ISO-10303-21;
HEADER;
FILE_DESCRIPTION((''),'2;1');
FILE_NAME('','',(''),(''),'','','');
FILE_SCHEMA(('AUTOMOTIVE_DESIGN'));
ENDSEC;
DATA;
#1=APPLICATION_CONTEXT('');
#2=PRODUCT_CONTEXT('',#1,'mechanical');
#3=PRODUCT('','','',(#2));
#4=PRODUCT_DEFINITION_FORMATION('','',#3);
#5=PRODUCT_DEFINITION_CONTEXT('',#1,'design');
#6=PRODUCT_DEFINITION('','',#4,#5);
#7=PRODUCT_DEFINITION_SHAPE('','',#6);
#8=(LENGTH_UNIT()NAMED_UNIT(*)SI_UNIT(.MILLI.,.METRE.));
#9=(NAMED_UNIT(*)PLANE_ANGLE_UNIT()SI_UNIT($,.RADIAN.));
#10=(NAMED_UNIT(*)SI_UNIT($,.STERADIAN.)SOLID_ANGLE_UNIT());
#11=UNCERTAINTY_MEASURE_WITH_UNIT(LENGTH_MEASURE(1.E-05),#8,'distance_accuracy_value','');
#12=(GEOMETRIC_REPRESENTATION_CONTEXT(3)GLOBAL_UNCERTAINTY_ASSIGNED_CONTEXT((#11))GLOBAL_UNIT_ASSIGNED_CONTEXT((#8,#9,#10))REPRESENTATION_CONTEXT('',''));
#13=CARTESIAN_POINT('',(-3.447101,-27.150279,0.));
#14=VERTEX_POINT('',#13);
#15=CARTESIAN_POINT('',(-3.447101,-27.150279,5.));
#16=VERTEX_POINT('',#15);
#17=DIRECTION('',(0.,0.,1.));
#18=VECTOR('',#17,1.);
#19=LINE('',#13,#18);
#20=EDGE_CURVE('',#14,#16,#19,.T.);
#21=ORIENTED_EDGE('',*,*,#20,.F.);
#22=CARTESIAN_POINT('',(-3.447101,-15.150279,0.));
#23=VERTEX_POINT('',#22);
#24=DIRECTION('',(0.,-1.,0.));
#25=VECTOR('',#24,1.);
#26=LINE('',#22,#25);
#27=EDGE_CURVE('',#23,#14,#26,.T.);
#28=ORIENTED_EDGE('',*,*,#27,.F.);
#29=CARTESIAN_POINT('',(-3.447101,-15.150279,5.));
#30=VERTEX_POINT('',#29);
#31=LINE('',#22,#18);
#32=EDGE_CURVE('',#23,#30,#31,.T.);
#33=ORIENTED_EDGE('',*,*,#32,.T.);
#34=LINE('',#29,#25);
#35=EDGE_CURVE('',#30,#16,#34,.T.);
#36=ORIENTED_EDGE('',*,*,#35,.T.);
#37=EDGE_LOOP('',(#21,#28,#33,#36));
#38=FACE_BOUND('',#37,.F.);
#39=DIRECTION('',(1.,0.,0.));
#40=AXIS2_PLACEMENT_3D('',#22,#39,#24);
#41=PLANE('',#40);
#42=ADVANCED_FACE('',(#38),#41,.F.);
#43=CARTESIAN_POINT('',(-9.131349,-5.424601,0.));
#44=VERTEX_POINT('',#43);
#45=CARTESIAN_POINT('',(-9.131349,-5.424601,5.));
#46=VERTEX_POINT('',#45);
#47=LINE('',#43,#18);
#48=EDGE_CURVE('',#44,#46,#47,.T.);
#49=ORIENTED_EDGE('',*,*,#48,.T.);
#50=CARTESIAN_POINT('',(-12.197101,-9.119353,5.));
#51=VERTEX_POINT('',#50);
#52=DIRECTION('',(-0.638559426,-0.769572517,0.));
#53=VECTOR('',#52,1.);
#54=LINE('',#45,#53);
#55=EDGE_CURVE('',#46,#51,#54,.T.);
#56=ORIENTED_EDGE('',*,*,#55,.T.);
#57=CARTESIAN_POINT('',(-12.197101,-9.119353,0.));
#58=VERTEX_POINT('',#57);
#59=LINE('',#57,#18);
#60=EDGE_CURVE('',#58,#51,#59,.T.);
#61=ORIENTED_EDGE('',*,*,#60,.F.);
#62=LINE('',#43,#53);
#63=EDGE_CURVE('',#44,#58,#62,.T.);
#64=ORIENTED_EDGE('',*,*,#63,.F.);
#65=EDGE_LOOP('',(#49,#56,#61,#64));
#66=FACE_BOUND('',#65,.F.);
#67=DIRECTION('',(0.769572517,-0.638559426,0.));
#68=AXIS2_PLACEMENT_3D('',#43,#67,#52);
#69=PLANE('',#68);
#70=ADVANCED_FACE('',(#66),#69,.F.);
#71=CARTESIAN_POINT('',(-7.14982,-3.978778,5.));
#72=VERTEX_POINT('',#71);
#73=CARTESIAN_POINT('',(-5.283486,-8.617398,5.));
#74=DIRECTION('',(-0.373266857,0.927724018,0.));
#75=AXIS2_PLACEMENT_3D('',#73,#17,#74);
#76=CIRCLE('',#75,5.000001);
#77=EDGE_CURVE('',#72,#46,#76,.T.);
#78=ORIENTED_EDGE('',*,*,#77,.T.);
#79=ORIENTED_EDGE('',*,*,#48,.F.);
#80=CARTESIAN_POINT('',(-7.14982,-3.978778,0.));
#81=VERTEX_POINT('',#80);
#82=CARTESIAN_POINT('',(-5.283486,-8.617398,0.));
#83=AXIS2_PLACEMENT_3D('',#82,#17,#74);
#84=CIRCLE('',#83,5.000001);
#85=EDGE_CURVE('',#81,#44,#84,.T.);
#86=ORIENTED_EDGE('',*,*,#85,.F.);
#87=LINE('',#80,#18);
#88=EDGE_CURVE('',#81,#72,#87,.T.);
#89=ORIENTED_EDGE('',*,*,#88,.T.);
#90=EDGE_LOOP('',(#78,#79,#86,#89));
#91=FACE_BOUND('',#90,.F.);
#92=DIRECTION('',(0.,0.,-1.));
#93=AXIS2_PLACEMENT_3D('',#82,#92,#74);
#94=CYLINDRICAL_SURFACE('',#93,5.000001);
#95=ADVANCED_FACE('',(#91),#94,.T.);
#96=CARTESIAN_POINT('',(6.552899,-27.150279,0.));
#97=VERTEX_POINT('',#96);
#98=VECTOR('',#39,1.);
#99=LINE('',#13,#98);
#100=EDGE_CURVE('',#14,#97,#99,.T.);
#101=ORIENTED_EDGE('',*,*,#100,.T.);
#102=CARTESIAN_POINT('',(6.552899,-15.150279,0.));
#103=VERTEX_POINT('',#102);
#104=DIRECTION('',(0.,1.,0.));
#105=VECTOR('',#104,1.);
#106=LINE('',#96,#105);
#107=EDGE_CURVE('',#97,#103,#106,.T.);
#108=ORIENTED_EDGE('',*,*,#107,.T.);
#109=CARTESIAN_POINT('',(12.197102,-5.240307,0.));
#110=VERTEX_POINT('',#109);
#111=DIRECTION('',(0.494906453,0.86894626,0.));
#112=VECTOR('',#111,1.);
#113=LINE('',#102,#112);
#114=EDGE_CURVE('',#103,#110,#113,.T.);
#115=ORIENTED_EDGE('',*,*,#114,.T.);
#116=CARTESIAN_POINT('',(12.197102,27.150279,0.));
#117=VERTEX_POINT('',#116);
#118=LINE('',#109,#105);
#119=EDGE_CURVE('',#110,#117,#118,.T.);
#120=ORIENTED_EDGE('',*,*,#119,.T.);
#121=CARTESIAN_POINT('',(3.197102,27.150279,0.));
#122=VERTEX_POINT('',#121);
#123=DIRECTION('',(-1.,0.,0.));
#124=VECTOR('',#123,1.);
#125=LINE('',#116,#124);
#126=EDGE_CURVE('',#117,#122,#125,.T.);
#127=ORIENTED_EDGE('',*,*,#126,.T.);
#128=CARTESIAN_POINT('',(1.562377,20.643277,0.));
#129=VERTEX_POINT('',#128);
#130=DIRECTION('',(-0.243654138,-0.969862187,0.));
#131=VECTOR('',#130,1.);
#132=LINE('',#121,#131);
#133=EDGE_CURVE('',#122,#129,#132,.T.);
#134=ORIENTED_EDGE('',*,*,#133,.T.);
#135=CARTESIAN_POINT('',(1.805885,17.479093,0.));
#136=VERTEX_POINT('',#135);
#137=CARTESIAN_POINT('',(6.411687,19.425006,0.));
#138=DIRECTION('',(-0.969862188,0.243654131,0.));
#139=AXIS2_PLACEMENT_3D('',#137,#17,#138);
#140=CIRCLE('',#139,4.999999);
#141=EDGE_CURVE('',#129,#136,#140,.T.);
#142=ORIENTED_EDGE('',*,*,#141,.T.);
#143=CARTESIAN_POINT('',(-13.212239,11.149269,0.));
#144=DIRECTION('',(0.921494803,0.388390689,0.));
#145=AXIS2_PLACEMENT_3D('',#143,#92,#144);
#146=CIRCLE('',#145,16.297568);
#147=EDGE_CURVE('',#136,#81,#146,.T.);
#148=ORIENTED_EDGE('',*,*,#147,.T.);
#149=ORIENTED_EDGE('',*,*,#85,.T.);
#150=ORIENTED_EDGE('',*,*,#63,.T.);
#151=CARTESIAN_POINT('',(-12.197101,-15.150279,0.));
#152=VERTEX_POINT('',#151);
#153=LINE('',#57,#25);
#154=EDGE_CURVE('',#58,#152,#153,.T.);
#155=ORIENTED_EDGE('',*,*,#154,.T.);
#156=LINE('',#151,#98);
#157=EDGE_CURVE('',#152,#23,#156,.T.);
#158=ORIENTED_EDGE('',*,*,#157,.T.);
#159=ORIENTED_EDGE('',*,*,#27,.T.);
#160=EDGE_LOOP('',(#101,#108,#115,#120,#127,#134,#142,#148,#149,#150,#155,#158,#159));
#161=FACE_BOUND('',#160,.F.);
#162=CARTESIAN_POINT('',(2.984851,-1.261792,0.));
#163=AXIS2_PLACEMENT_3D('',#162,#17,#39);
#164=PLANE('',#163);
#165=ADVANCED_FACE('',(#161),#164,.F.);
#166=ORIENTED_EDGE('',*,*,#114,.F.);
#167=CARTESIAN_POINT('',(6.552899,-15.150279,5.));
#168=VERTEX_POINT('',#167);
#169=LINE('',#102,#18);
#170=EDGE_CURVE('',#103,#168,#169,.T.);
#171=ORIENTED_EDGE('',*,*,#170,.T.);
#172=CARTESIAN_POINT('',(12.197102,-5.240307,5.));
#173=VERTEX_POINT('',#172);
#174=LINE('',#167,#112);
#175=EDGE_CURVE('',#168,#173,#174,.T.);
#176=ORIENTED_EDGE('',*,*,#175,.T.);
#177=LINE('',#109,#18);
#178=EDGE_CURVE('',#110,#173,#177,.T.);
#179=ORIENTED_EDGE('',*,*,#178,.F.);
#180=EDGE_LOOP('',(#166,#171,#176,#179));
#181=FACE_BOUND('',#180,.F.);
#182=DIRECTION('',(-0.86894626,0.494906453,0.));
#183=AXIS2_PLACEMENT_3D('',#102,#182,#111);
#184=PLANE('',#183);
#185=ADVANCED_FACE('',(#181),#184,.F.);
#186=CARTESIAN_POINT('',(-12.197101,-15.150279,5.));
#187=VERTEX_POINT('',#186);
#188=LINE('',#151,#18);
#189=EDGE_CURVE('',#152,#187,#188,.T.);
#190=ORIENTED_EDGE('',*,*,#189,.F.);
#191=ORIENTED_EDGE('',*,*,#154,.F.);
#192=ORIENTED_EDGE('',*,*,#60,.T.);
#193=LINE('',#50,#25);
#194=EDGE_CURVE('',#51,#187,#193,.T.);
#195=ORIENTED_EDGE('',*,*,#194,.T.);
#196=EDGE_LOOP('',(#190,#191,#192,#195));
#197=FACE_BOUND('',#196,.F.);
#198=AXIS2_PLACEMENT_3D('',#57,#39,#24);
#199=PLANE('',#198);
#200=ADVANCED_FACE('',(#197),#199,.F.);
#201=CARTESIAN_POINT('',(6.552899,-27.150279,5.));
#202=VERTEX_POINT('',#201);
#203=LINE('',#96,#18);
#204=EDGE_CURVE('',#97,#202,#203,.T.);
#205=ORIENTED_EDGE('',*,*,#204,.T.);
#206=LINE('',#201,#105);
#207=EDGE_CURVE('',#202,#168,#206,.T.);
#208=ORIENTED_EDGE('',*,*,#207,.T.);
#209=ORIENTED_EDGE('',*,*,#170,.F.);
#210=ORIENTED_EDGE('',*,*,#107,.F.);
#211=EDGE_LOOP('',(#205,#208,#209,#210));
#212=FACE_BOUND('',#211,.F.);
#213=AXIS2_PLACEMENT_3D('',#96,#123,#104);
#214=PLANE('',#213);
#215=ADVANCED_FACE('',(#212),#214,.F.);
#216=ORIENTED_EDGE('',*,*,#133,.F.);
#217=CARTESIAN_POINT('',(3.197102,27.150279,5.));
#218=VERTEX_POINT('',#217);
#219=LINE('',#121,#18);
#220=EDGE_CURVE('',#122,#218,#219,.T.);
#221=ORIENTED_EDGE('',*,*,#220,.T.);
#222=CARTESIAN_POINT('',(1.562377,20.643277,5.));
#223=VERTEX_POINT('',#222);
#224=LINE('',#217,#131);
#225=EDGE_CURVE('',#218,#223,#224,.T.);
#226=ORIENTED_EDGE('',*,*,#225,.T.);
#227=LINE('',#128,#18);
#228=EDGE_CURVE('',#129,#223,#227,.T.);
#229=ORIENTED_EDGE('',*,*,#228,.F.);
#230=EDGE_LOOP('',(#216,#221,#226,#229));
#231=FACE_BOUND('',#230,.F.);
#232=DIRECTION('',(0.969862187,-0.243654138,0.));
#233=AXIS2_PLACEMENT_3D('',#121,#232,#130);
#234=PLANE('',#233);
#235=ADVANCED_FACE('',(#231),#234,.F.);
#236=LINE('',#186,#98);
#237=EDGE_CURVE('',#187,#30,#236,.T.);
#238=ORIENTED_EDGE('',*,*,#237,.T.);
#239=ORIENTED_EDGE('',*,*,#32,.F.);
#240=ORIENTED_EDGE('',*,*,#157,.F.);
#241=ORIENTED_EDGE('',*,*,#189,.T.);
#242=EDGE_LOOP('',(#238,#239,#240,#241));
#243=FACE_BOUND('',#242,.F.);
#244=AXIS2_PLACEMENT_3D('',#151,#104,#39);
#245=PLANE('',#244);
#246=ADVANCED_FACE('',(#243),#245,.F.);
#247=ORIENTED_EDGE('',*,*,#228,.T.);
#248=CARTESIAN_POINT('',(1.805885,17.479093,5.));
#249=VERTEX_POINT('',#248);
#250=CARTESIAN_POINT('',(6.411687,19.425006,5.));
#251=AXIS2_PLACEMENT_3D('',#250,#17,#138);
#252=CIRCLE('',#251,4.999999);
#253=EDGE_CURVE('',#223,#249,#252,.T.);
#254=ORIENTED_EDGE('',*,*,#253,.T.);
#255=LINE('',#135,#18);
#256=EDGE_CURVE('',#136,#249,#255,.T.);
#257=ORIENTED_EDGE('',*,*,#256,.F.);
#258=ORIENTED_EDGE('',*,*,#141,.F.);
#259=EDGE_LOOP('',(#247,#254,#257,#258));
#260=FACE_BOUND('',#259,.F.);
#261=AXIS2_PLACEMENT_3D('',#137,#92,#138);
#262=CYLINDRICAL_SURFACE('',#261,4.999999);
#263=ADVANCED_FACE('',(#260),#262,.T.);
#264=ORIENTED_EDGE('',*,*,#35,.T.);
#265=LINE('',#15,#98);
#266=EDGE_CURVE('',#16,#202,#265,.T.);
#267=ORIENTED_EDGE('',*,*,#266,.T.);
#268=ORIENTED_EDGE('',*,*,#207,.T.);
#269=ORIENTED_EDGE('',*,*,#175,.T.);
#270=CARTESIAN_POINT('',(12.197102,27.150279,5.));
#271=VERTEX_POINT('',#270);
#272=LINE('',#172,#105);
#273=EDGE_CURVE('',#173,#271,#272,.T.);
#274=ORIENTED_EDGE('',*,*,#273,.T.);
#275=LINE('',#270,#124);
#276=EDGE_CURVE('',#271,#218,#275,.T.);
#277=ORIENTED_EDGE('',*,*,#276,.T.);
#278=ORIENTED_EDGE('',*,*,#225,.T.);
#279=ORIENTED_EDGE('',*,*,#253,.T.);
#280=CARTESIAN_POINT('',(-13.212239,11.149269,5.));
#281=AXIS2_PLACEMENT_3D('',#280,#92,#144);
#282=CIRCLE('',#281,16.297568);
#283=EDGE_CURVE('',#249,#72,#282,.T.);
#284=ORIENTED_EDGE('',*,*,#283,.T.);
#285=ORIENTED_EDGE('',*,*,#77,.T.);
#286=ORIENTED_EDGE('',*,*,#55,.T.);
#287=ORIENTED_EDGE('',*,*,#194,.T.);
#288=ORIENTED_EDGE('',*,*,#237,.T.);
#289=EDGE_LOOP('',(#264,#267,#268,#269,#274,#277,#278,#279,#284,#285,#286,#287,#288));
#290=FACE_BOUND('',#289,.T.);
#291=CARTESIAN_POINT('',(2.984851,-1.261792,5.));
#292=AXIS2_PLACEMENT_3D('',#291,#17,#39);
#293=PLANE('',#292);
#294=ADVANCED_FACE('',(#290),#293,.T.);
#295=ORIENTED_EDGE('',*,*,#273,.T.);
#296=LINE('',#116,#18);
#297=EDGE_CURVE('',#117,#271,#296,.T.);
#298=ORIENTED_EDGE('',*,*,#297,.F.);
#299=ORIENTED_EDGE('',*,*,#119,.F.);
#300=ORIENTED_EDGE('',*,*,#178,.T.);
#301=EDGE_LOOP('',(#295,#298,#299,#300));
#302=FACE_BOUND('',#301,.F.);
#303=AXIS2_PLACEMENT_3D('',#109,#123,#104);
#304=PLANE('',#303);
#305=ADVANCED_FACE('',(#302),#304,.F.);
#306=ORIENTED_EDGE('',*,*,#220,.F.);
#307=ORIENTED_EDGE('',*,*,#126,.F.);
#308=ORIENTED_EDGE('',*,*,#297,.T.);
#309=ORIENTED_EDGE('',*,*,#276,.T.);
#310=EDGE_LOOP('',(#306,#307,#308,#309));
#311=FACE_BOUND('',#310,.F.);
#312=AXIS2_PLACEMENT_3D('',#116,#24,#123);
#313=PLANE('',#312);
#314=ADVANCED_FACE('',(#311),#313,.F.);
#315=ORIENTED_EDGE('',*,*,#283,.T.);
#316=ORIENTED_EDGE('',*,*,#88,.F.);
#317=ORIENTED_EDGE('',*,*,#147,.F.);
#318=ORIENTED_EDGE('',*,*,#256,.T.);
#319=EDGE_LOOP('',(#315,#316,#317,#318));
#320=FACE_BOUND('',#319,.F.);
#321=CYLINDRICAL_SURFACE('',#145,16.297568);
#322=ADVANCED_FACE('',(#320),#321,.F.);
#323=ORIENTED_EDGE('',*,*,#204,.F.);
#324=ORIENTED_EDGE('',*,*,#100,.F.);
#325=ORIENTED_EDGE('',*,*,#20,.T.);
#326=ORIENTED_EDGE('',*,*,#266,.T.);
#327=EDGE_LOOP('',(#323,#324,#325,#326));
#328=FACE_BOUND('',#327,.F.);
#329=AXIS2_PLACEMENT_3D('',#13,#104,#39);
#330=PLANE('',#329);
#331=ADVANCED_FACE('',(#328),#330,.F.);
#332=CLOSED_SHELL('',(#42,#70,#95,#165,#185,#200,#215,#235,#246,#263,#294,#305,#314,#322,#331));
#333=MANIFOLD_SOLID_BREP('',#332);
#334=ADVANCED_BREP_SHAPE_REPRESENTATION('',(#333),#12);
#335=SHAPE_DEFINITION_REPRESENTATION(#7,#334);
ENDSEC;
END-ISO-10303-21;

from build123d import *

# Parameters (mm, degrees)
F1_DEPTH = 5


# Not quite as in the source:
# - ends of sketch curves that miss each other by under 0.0002 mm in the source are joined


with BuildPart() as f1:
    # F0 (on Top) → F1 (new body)
    with BuildSketch(Plane.XY):
        with BuildLine():
            ThreePointArc((1.8058852177, 17.4790926703), (1.8279530148, 4.8720604744), (-7.149820085, -3.9787777878))
            ThreePointArc((-7.149820085, -3.9787777878), (-8.2306223723, -4.5782907715), (-9.1313488192, -5.4246011501))
            Line((-9.1313488192, -5.4246011501), (-12.197101, -9.119353))
            Line((-12.197101, -9.119353), (-12.197101, -15.150279))
            Line((-12.197101, -15.150279), (-3.447101, -15.150279))
            Line((-3.447101, -15.150279), (-3.447101, -27.150279))
            Line((-3.447101, -27.150279), (6.552899, -27.150279))
            Line((6.552899, -27.150279), (6.552899, -15.150279))
            Line((6.552899, -15.150279), (12.197102, -5.240307))
            Line((12.197102, -5.240307), (12.197102, 27.150279))
            Line((12.197102, 27.150279), (3.197102, 27.150279))
            Line((3.197102, 27.150279), (1.562377, 20.643277))
            ThreePointArc((1.562377, 20.643277), (1.4264287194, 19.0413526341), (1.8058852177, 17.4790926703))
        make_face()
    extrude(amount=F1_DEPTH)


solid = f1.part
